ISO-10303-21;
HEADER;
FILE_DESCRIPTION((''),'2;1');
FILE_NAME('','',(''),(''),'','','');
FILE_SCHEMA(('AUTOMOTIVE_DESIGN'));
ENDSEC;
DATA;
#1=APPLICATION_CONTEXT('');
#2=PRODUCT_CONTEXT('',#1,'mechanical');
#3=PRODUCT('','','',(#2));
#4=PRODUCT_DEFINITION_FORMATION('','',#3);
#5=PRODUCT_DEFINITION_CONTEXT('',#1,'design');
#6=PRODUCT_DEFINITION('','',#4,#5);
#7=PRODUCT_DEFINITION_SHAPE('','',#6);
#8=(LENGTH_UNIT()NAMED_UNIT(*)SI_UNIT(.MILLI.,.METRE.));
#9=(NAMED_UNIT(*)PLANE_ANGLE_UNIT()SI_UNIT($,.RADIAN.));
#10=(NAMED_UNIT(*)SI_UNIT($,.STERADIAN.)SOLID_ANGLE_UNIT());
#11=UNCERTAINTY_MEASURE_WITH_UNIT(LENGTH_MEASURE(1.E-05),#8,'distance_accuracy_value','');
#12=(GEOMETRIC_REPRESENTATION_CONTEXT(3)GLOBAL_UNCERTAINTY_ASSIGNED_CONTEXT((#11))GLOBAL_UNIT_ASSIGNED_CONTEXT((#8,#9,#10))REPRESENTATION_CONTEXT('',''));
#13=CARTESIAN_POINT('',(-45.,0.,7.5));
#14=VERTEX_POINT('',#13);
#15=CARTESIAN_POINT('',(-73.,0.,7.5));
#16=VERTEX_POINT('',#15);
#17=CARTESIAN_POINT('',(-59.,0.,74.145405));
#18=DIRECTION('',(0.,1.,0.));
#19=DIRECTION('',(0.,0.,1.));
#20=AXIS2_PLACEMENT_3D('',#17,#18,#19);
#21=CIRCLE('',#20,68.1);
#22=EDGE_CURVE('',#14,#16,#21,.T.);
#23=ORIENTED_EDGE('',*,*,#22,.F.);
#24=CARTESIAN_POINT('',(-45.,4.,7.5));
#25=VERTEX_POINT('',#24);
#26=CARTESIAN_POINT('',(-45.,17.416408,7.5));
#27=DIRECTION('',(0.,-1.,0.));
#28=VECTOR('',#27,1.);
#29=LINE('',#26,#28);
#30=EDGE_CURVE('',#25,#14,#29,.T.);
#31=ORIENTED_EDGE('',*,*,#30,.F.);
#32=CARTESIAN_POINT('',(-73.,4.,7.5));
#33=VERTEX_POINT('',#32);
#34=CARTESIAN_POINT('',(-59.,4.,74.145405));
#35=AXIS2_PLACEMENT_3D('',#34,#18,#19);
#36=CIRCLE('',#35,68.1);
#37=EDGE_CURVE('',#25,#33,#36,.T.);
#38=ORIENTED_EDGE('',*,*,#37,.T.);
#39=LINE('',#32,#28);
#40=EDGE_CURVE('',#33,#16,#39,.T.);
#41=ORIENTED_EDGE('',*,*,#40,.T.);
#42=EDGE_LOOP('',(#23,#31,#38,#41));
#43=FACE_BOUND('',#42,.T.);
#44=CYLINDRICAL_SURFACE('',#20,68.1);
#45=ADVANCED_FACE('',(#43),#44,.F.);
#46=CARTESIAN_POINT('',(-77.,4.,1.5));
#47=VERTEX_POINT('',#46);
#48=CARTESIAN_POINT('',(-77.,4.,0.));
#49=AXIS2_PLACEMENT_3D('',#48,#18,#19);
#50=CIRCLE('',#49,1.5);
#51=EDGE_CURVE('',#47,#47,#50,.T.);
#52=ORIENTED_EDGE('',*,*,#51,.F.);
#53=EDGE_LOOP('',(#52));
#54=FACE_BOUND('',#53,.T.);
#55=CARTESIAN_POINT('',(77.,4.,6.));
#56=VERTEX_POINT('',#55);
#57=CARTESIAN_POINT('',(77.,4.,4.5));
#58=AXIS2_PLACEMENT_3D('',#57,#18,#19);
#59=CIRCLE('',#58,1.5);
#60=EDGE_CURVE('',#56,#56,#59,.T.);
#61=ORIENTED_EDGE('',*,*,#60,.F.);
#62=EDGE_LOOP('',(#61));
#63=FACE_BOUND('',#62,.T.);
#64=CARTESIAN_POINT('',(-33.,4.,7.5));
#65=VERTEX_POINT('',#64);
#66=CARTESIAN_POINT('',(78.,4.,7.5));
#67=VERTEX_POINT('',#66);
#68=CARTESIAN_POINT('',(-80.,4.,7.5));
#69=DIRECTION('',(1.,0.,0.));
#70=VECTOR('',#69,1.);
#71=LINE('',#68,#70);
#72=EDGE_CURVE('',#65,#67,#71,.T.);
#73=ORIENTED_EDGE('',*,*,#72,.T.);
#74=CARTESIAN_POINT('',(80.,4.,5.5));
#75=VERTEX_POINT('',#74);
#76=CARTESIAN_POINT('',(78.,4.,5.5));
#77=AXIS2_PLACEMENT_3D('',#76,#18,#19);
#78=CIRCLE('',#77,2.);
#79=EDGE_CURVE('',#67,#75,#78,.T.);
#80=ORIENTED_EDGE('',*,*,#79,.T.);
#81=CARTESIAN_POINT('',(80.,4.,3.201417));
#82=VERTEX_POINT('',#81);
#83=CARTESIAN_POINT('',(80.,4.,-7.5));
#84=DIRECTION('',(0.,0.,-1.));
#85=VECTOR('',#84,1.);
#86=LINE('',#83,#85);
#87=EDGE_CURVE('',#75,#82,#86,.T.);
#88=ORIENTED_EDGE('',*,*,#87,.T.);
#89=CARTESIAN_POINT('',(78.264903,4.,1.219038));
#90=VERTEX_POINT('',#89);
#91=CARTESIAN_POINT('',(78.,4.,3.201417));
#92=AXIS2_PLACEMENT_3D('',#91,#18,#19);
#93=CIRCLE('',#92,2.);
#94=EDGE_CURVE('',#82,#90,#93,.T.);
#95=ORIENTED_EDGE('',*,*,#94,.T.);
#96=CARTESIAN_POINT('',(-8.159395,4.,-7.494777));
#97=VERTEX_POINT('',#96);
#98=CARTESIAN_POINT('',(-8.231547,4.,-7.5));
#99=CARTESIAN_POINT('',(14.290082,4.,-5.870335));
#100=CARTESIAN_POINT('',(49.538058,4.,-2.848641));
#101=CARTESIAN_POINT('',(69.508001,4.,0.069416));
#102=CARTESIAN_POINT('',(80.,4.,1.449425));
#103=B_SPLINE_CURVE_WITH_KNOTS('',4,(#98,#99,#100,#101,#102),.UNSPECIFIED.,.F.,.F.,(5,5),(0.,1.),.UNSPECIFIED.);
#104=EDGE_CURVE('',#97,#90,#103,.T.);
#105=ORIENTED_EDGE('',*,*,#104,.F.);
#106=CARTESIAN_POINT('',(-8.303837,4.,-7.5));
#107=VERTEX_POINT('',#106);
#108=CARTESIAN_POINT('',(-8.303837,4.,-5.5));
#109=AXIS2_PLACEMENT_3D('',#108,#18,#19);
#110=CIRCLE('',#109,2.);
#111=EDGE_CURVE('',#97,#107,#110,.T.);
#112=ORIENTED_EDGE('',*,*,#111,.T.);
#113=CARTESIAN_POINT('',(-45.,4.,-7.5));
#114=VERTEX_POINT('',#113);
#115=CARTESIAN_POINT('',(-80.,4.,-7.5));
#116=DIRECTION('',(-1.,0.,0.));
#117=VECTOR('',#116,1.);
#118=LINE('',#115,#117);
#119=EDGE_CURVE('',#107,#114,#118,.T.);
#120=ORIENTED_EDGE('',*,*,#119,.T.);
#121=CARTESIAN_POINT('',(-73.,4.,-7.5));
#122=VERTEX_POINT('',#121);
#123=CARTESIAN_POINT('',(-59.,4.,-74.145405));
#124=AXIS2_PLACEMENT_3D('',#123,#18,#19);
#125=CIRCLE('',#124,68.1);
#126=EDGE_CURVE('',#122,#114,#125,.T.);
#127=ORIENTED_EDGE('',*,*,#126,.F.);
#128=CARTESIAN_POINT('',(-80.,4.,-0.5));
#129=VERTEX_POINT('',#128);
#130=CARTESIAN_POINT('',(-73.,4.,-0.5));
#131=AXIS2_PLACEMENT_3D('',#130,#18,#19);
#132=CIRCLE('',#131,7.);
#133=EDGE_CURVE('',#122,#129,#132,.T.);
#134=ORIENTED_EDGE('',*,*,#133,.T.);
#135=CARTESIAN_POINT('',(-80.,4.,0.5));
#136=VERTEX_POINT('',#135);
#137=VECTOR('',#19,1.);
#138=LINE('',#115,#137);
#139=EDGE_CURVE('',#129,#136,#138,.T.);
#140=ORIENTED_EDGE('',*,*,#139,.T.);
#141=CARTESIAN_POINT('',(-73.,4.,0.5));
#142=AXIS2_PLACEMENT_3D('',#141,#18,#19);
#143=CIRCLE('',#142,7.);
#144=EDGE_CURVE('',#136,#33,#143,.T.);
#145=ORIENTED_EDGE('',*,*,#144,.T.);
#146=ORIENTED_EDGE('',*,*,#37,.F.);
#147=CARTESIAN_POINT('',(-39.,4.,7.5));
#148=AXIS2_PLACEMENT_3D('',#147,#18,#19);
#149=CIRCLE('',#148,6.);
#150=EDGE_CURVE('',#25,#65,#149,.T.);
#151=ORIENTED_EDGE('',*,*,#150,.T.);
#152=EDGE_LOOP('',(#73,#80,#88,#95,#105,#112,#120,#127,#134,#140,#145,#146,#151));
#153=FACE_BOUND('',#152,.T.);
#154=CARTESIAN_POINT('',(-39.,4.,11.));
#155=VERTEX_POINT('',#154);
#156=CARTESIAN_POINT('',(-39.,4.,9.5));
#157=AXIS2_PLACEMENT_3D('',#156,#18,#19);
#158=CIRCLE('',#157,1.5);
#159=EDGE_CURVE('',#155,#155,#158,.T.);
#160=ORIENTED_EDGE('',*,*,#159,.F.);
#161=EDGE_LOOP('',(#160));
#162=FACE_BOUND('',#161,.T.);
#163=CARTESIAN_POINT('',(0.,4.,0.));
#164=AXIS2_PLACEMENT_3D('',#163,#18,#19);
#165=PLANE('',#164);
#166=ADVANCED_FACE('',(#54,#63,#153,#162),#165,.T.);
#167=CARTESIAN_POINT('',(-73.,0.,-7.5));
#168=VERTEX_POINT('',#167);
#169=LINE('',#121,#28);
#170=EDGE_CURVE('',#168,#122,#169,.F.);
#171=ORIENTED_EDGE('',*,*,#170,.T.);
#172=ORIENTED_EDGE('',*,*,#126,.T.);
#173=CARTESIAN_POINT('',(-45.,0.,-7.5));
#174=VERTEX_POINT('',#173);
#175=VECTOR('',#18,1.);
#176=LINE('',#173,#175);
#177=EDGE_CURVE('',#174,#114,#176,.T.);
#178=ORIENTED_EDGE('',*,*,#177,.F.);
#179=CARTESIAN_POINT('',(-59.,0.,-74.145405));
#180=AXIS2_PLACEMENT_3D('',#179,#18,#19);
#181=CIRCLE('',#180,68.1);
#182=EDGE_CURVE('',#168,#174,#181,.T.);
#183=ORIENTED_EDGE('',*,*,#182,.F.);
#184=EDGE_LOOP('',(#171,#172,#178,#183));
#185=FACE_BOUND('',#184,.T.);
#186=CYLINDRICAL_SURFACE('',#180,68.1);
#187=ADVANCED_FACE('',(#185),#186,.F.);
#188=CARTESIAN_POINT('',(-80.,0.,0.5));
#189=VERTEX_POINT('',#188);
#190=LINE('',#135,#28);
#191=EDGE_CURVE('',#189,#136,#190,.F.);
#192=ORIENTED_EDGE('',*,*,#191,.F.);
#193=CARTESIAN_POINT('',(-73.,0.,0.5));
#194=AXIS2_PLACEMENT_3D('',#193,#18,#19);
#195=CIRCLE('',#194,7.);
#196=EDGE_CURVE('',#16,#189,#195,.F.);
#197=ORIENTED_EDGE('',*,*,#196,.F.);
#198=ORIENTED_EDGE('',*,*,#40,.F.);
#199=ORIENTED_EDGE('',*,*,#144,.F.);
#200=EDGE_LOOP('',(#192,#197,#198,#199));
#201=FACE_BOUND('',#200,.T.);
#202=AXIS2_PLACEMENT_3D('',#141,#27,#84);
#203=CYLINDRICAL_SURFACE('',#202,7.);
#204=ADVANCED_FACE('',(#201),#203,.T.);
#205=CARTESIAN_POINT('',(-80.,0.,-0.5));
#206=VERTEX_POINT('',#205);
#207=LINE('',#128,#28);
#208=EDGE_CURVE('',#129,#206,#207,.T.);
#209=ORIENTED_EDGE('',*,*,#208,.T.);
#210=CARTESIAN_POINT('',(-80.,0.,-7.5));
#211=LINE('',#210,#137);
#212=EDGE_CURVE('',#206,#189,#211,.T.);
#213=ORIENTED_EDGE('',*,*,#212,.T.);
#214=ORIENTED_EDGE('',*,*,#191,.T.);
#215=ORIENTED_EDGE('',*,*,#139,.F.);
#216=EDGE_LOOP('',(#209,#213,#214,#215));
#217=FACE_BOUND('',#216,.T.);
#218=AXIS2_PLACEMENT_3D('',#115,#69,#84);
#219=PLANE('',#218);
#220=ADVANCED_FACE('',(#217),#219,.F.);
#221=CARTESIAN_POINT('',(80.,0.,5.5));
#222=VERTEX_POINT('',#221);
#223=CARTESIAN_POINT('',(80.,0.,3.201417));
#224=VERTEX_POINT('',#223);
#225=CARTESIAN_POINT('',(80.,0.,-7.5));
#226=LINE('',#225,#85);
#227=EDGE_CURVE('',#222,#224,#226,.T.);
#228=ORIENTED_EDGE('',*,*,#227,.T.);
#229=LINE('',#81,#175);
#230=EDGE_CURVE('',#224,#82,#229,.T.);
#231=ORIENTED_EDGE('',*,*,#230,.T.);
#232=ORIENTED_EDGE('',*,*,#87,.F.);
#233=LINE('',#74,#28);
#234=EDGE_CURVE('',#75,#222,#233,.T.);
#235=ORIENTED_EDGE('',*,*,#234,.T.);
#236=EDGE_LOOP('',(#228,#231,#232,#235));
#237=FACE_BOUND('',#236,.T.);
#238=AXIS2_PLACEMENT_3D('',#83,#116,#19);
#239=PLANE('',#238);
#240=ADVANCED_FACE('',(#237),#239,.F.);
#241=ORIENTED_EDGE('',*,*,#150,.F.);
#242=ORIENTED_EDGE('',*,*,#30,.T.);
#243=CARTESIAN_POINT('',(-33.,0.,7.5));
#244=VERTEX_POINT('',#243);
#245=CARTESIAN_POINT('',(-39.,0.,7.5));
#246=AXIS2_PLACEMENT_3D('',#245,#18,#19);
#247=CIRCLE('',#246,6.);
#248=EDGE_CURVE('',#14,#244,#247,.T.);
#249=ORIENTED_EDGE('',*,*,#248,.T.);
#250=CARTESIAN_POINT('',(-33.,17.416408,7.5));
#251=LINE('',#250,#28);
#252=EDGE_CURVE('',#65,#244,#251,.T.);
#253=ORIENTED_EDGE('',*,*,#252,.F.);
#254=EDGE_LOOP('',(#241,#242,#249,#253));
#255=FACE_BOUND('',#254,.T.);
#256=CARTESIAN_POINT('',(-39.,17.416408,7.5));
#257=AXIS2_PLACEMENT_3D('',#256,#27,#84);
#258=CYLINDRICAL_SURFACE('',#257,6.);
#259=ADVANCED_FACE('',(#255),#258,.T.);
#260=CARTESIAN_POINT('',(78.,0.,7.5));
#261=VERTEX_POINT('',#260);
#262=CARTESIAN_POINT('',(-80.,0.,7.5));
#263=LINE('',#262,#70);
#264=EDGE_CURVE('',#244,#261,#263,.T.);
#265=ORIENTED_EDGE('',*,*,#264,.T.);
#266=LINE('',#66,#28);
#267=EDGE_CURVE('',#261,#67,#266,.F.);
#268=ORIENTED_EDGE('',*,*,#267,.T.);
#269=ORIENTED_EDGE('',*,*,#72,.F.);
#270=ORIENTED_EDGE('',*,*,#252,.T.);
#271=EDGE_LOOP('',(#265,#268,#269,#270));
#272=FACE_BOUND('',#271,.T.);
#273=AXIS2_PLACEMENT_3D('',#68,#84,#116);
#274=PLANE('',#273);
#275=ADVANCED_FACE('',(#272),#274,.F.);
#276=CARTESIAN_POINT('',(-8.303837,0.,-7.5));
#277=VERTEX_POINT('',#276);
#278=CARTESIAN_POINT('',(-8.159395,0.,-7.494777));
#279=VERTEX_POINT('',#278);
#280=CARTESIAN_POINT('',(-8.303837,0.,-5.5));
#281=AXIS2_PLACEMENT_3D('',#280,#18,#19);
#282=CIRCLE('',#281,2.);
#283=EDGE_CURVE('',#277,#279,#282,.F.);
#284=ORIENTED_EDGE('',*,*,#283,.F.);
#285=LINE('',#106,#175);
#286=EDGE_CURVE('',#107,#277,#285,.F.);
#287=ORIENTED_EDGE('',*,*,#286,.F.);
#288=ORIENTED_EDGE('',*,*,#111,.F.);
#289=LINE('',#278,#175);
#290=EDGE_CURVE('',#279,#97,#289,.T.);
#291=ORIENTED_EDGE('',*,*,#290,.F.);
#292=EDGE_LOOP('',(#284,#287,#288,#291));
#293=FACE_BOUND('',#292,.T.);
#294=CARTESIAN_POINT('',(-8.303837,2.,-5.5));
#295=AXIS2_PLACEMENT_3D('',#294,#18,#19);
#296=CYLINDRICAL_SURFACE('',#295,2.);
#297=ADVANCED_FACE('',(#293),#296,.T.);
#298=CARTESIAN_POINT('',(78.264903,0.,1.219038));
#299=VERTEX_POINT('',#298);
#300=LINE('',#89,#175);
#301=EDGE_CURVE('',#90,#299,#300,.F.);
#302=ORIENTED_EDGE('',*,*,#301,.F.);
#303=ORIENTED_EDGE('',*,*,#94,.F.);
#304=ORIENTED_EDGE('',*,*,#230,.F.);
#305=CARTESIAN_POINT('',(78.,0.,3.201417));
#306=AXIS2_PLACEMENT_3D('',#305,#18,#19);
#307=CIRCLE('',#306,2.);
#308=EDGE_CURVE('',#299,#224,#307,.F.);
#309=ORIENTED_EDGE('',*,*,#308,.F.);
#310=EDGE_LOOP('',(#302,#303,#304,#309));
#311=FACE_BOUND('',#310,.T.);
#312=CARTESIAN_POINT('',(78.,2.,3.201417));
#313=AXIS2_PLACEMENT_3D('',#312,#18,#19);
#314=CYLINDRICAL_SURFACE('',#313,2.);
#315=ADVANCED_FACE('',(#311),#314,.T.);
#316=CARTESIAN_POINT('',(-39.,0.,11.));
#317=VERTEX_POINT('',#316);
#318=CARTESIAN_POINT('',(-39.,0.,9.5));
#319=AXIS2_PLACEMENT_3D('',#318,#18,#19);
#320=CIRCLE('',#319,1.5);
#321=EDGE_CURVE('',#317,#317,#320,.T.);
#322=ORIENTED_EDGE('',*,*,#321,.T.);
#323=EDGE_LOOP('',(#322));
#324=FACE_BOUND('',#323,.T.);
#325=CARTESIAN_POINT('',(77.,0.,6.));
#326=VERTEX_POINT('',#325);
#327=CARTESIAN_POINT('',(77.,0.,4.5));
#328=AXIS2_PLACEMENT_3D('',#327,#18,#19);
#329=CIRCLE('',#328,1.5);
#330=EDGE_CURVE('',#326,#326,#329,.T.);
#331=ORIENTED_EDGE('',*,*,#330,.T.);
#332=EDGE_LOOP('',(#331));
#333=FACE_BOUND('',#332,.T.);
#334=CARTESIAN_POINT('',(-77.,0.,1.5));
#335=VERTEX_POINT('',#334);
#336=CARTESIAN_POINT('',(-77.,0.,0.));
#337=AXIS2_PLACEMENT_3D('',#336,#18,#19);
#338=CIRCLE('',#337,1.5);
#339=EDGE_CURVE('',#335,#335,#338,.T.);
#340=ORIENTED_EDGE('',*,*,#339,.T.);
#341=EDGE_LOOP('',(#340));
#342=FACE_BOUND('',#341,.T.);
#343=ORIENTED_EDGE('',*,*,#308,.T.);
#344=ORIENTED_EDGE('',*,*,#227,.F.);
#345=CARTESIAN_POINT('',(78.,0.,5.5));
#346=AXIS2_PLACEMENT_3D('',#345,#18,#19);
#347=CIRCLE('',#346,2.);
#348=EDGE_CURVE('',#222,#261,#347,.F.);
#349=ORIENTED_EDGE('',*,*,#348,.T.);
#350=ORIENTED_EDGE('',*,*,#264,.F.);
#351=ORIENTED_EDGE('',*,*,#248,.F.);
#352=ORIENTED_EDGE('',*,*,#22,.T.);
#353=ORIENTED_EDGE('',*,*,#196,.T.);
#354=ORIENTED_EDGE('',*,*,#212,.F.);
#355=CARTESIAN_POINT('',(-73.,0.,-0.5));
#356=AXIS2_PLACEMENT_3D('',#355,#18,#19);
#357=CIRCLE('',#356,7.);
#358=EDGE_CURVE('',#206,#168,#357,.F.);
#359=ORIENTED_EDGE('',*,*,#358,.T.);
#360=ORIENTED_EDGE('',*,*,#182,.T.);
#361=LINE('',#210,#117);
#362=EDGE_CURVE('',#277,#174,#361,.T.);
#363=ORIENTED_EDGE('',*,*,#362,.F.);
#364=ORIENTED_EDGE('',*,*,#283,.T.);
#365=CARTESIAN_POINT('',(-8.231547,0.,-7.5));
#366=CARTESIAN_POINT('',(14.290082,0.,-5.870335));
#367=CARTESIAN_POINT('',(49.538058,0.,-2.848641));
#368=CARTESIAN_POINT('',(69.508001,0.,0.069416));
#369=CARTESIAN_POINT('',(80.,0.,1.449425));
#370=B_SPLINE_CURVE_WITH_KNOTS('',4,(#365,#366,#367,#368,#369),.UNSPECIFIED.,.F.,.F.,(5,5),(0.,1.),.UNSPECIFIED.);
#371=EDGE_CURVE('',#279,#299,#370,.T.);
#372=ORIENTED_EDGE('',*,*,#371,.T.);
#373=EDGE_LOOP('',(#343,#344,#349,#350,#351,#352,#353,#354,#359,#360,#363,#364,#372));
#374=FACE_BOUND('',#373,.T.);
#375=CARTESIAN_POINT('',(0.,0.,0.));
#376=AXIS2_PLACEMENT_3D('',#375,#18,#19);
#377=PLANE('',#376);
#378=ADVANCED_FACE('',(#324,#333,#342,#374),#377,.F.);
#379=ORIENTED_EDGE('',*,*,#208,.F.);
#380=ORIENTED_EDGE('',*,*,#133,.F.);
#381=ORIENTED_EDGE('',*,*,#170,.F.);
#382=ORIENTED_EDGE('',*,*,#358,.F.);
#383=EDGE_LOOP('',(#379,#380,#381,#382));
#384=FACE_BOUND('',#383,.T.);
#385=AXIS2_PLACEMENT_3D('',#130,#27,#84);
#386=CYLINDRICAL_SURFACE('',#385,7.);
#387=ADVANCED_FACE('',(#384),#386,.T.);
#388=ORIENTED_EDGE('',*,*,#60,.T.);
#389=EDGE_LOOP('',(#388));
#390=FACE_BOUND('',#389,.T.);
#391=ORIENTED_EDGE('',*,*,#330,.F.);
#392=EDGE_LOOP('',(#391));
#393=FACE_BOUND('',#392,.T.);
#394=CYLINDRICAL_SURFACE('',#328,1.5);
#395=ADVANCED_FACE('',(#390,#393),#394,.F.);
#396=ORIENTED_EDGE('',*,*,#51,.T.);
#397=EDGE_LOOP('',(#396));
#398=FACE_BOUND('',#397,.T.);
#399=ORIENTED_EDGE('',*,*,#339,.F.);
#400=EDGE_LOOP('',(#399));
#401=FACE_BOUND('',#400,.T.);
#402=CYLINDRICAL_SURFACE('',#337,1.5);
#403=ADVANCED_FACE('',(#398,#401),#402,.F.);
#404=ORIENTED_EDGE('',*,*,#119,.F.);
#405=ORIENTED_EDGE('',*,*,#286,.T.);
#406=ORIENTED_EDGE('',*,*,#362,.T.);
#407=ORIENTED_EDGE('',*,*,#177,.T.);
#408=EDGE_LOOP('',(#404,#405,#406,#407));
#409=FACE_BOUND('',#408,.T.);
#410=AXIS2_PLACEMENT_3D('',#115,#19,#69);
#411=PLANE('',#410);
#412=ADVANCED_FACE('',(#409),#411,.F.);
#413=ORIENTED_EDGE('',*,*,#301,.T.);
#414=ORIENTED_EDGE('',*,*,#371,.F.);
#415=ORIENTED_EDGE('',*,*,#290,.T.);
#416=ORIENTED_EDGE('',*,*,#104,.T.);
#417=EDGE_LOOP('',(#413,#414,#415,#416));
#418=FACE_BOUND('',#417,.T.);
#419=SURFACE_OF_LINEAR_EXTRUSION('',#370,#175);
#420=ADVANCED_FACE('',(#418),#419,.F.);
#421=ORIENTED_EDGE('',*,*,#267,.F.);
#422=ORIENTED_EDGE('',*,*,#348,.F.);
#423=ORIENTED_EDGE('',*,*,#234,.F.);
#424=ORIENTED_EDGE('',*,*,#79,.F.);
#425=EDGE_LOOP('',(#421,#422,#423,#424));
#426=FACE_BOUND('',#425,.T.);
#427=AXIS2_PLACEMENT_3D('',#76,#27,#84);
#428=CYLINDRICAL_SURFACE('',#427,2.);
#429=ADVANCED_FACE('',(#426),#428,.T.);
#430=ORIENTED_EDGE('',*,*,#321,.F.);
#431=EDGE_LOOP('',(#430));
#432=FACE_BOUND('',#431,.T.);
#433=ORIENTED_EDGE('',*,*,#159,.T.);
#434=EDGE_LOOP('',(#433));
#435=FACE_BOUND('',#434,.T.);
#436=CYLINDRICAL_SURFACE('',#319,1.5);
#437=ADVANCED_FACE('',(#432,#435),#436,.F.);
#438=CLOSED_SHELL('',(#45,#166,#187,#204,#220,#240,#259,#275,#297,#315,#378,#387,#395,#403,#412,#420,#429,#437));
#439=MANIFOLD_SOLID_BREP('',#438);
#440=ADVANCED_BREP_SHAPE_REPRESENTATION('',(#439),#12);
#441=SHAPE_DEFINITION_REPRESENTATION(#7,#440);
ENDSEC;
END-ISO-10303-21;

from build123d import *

# Parameters (mm, degrees)
SKETCH2_W           = 160
SKETCH2_H           = 15
BOSS_EXTRUDE1_DEPTH = 4
BOSS_EXTRUDE2_DEPTH = 4
SKETCH5_R           = 1.5
CUT_EXTRUDE1_DEPTH  = 82.229612827
CUT_EXTRUDE2_DEPTH  = 82.229612827
FILLET1_R           = 7
FILLET2_R           = 2
CUT_EXTRUDE3_DEPTH  = 82.229612947


with BuildPart() as part:
    # Sketch2 → Boss-Extrude1 (new body)
    with BuildSketch(Plane(origin=(0, 0, 0), x_dir=(1, 0, 0), z_dir=(0, 1, 0))):
        Rectangle(SKETCH2_W, SKETCH2_H)
    extrude(amount=BOSS_EXTRUDE1_DEPTH)

    # Sketch4 → Boss-Extrude2 (add)
    with BuildSketch(Plane(origin=(0, 0, 0), x_dir=(1, 0, 0), z_dir=(0, 1, 0))):
        with BuildLine():
            Line((-45, -7.5), (-33, -7.5))
            ThreePointArc((-33, -7.5), (-39, -13.5), (-45, -7.5))
        make_face()
    extrude(amount=BOSS_EXTRUDE2_DEPTH)

    # Sketch5 → Cut-Extrude1 (cut, through all)
    with BuildSketch(Plane(origin=(0, 4, 0), x_dir=(1, 0, 0), z_dir=(0, 1, 0))):
        with Locations(Location((-77, 0, 0), (0, 0, 270))):
            Circle(SKETCH5_R)
        with Locations(Location((-39, -9.5, 0), (0, 0, 270))):
            Circle(SKETCH5_R)
        with Locations(Location((77, -4.5, 0), (0, 0, 270))):
            Circle(SKETCH5_R)
    extrude(amount=-CUT_EXTRUDE1_DEPTH, mode=Mode.SUBTRACT)

    # Sketch6 → Cut-Extrude2 (cut, through all)
    with BuildSketch(Plane(origin=(0, 4, 0), x_dir=(1, 0, 0), z_dir=(0, 1, 0))):
        with BuildLine():
            Line((80, 7.5), (-8.231546833, 7.5))
            add(Edge.make_bspline(
                [(-8.231546833, 7.5), (14.290081903, 5.870335425), (49.538058278, 2.848640909), (69.508001123, -0.069415723), (80, -1.449425232)],
                knots=[0, 0, 0, 0, 0, 1, 1, 1, 1, 1], degree=4))
            Line((80, -1.449425232), (80, 7.5))
        make_face()
    extrude(amount=-CUT_EXTRUDE2_DEPTH, mode=Mode.SUBTRACT)

    # Fillet1
    fillet1_edges = [part.edges().sort_by_distance(p)[0] for p in [
        (-80, 2, -7.5),
        (-80, 2, 7.5),
    ]]
    fillet(fillet1_edges, radius=FILLET1_R)

    # Fillet2
    # the kernel refuses this fillet: 2 mm, written as the material it takes off along each edge
    with BuildSketch(Plane(origin=(-8.231546833, 4, -7.5), x_dir=(-1, 0, 0), z_dir=(0, -1, 0))) as fillet2_piece_1:
        with BuildLine():
            CenterArc((0.072290514, -2), FILLET2_R, 90, 4.141569808)
            Line((-0.072151683, -0.005222706), (-0.075040527, 0.03467284))
            ThreePointArc((-0.075040527, 0.03467284), (-0.038963722, 0.037284715), (-0.002886851, 0.03989569))
            Line((-0.002886851, 0.03989569), (0, 0.04))
            Line((0, 0.04), (0.072290514, 0.04))
            Line((0.072290514, 0.04), (0.072290514, 0))
        make_face()
    extrude(amount=4, mode=Mode.SUBTRACT)
    with BuildSketch(Plane(origin=(80, 0, 7.5), x_dir=(-1, 0, 0), z_dir=(0, 1, 0))) as fillet2_piece_2:
        with BuildLine():
            CenterArc((FILLET2_R, -FILLET2_R), FILLET2_R, 90, 90)
            Line((0, -FILLET2_R), (-FILLET2_R * 0.02, -FILLET2_R))
            Line((-FILLET2_R * 0.02, -FILLET2_R), (-FILLET2_R * 0.02, FILLET2_R * 0.02))
            Line((-FILLET2_R * 0.02, FILLET2_R * 0.02), (FILLET2_R, FILLET2_R * 0.02))
            Line((FILLET2_R, FILLET2_R * 0.02), (FILLET2_R, 0))
        make_face()
    extrude(amount=4, mode=Mode.SUBTRACT)
    with BuildSketch(Plane(origin=(80, 4, 1.449425232), x_dir=(-0.9912995401068606, 0, -0.13162530829565738), z_dir=(0, -1, 0))) as fillet2_piece_3:
        with BuildLine():
            CenterArc((1.751992616, -1.999999306), FILLET2_R, 90.047746208, 82.388731024)
            Line((-0.230606464, -1.736748689), (-0.270258446, -1.731483677))
            Line((-0.270258446, -1.731483677), (-0.039651982, 0.005265012))
            Line((-0.039651982, 0.005265012), (4.9175e-05, 0.03999997))
            ThreePointArc((4.9175e-05, 0.03999997), (0.875159086, 0.039555606), (1.750292626, 0.039999986))
            Line((1.750292626, 0.039999986), (1.750325959, 0))
        make_face()
    extrude(amount=4, mode=Mode.SUBTRACT)

    # Sketch7 → Cut-Extrude3 (cut, through all)
    with BuildSketch(Plane(origin=(0, 4, 0), x_dir=(1, 0, 0), z_dir=(0, 1, 0))):
        with BuildLine():
            Line((-73, -7.5), (-45, -7.5))
            ThreePointArc((-45, -7.5), (-59, -6.045404943), (-73, -7.5))
        make_face()
        with BuildLine():
            Line((-73, 7.5), (-45, 7.5))
            ThreePointArc((-45, 7.5), (-59, 6.045404943), (-73, 7.5))
        make_face()
    extrude(amount=-CUT_EXTRUDE3_DEPTH, mode=Mode.SUBTRACT)


solid = part.part
